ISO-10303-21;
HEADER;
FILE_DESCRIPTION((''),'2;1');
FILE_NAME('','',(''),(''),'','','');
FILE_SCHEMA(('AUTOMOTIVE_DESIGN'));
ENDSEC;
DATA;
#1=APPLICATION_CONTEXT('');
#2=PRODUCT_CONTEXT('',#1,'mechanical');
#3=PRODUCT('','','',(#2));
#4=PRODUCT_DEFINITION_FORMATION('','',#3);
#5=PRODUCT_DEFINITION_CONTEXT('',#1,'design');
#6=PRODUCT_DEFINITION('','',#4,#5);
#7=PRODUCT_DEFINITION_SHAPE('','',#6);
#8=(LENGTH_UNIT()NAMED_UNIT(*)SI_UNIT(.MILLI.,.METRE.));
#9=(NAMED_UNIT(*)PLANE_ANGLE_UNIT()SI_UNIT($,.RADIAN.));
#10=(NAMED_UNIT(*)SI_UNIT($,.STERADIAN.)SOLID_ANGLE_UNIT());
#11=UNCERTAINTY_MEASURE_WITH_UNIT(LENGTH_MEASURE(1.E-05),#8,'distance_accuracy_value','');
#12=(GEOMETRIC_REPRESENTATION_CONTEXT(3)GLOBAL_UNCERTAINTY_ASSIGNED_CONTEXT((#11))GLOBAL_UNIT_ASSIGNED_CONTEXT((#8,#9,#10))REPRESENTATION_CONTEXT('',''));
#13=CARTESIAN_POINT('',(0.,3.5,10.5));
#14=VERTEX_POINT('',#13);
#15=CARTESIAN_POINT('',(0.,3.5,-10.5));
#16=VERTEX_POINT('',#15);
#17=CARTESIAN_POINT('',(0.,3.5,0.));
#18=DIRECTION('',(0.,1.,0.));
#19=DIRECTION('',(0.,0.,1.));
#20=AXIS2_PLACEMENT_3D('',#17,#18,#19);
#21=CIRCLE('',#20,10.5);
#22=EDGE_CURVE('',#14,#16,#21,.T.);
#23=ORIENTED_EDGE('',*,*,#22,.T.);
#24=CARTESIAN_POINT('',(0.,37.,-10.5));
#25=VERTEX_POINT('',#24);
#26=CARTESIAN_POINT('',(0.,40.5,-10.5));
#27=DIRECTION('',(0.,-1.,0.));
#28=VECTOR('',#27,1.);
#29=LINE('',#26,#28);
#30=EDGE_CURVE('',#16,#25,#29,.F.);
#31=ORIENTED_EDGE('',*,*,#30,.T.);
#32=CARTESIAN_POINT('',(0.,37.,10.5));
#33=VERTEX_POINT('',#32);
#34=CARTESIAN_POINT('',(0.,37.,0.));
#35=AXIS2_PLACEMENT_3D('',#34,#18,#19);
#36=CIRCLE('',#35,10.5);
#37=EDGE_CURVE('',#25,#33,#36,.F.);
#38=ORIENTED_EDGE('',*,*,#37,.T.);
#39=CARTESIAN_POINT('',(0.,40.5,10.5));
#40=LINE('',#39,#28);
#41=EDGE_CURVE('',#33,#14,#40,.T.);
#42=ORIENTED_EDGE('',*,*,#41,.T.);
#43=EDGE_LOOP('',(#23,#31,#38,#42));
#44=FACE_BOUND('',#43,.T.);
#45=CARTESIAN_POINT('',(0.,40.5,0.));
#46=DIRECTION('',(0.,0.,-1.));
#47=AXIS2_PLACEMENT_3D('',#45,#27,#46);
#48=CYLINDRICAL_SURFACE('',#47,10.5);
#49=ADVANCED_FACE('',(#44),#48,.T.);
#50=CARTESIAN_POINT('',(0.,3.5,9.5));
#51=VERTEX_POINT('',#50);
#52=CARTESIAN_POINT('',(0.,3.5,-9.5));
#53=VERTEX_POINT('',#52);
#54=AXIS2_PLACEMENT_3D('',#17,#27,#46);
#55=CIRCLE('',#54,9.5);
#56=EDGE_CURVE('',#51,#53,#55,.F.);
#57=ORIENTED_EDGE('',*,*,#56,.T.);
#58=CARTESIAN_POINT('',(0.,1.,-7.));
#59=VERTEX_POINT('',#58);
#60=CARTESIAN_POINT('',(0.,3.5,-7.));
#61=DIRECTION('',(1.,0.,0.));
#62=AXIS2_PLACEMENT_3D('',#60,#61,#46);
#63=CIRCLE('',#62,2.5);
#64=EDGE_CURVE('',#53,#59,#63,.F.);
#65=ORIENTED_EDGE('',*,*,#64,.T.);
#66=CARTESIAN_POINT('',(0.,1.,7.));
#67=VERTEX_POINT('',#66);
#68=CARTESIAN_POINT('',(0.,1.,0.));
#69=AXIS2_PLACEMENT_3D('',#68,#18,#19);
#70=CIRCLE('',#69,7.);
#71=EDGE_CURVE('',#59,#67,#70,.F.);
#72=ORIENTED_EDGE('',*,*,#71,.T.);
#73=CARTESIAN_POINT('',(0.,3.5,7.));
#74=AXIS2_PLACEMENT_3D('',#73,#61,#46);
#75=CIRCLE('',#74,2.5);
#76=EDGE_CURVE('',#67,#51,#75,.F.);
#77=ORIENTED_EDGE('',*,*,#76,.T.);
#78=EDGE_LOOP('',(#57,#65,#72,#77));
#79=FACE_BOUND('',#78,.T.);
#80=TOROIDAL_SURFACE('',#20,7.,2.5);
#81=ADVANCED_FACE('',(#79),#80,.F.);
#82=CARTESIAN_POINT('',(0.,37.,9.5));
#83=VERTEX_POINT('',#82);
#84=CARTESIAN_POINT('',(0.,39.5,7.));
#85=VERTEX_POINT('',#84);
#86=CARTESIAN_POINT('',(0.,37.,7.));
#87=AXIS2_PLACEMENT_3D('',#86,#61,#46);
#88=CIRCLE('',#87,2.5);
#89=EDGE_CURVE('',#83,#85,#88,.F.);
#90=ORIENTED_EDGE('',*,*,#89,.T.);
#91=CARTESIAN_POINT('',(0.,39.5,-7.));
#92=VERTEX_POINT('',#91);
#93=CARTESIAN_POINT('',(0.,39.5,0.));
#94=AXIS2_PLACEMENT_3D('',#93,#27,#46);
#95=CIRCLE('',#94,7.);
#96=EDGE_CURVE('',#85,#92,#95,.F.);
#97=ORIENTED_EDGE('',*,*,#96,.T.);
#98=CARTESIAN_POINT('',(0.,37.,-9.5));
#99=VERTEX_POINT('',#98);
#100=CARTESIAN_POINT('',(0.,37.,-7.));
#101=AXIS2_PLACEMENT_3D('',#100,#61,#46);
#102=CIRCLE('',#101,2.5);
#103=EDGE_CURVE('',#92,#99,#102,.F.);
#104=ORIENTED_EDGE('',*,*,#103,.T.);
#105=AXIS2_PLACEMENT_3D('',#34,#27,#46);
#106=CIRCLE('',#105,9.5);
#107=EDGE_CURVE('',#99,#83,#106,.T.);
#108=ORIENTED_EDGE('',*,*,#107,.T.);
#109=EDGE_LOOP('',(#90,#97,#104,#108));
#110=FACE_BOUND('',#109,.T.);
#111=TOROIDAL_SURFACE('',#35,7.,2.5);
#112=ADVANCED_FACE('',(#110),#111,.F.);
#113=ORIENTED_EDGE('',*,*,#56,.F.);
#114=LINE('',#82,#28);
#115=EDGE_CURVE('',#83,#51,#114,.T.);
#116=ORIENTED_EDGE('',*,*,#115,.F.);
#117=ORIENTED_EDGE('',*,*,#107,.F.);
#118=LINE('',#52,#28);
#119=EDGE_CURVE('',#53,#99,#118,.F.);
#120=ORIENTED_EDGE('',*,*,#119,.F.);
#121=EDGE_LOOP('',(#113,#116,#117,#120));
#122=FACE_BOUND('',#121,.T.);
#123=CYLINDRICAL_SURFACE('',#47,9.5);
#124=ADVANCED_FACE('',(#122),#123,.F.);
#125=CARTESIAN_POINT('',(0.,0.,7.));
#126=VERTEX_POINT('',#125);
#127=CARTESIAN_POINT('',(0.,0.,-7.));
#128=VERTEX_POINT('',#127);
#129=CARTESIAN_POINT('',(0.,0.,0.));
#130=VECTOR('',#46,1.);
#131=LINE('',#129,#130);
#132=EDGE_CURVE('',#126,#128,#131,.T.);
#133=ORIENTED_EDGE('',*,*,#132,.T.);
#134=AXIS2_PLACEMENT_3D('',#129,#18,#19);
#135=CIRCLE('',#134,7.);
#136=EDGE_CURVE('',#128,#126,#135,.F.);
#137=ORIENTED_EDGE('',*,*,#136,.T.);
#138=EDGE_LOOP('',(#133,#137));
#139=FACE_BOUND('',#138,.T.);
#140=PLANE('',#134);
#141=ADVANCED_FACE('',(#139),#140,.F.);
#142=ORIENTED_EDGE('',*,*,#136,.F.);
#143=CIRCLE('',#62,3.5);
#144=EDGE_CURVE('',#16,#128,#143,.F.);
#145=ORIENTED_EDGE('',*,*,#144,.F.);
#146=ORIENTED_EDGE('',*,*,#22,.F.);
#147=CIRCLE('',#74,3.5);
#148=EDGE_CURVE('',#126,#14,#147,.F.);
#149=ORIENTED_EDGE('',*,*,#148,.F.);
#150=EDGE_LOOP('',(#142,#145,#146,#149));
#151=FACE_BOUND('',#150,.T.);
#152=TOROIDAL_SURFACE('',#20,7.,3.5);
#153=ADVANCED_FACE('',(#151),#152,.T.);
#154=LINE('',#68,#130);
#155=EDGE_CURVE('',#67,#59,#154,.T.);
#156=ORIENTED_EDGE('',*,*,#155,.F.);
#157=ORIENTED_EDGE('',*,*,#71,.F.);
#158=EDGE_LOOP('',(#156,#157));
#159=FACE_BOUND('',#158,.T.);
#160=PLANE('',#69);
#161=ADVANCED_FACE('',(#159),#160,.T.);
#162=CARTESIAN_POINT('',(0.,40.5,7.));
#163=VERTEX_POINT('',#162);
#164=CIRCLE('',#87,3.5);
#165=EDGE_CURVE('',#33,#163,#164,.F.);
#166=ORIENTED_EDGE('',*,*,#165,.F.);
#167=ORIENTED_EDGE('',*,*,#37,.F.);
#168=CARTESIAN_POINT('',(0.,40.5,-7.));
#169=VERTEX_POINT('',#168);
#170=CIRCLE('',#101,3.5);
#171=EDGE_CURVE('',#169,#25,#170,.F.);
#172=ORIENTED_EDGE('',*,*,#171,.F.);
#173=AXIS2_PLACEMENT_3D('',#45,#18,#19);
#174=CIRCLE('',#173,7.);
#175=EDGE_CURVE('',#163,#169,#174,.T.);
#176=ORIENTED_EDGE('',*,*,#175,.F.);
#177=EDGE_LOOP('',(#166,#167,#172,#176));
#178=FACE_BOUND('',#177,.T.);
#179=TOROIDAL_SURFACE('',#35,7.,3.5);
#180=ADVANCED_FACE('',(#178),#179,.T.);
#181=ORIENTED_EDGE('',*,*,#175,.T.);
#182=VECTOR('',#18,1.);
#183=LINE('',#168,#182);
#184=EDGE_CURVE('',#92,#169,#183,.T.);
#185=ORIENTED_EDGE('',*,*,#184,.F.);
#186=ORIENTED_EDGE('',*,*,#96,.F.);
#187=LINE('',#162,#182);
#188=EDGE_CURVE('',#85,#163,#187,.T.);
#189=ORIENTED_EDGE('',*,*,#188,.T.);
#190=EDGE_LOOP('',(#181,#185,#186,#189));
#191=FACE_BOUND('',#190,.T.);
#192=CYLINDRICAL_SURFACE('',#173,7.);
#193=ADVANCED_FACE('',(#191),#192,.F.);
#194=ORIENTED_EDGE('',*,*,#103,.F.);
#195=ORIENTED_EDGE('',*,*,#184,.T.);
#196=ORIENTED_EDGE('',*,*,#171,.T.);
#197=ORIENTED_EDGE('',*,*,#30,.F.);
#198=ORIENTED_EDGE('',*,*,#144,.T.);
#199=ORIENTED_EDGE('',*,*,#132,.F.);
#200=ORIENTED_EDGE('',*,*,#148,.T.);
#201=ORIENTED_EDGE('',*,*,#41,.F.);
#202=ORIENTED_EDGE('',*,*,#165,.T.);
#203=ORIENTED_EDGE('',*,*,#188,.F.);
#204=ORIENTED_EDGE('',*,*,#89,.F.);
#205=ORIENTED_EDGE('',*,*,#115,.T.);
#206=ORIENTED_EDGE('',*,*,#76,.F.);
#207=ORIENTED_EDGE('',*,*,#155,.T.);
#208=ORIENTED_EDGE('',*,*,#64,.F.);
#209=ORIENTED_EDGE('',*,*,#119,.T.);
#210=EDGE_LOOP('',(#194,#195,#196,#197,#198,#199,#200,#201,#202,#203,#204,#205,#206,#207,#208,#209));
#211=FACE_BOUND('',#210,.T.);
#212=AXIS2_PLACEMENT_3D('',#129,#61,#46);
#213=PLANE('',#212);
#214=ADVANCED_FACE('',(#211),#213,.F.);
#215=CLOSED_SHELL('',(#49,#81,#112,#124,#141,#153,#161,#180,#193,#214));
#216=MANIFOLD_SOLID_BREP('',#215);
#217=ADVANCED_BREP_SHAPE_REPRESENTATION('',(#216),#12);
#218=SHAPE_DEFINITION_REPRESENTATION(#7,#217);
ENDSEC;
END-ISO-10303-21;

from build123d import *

# Parameters (mm, degrees)
SKETCH1_R           = 10.5
BOSS_EXTRUDE1_DEPTH = 40.5
FILLET1_R           = 3.5
SKETCH2_W           = 41.275373403
SKETCH2_H           = 50.56233242
CUT_EXTRUDE1_DEPTH  = 40.5


# Read off the part's stored shape, not the designer's step: Shell4
with BuildPart() as part:
    # Sketch1 → Boss-Extrude1 (new body)
    with BuildSketch(Plane(origin=(0, 0, 0), x_dir=(1, 0, 0), z_dir=(0, 1, 0))):
        with Locations(Location((0, 0, 0), (0, 0, 270))):
            Circle(SKETCH1_R)
    extrude(amount=BOSS_EXTRUDE1_DEPTH)

    # Fillet1
    fillet1_edges = [part.edges().sort_by_distance(p)[0] for p in [
        (0, 0, -10.5),
        (0, 40.5, -10.5),
    ]]
    fillet(fillet1_edges, radius=FILLET1_R)

    # Sketch2 → Cut-Extrude1 (cut)
    with BuildSketch(Plane(origin=(0, 0, 0), x_dir=(0, 0, -1), z_dir=(1, 0, 0))):
        with Locations((2.800828909, 23.566771077)):
            Rectangle(SKETCH2_W, SKETCH2_H)
    extrude(amount=-CUT_EXTRUDE1_DEPTH, mode=Mode.SUBTRACT)

    # Shell4 outline → Shell4 (revolve, cut)
    with BuildSketch(Plane.XY):
        with BuildLine():
            Line((0, 1), (7, 1))
            ThreePointArc((7, 1), (8.767766953, 1.732233047), (9.5, 3.5))
            Line((9.5, 3.5), (9.5, 37))
            ThreePointArc((9.5, 37), (8.767766953, 38.767766953), (7, 39.5))
            Line((7, 39.5), (7, 40.5))
            Line((7, 40.5), (0, 40.5))
            Line((0, 40.5), (0, 1))
        make_face()
    revolve(axis=Axis((0, 0, 0), (0, 1, 0)), mode=Mode.SUBTRACT)


solid = part.part
